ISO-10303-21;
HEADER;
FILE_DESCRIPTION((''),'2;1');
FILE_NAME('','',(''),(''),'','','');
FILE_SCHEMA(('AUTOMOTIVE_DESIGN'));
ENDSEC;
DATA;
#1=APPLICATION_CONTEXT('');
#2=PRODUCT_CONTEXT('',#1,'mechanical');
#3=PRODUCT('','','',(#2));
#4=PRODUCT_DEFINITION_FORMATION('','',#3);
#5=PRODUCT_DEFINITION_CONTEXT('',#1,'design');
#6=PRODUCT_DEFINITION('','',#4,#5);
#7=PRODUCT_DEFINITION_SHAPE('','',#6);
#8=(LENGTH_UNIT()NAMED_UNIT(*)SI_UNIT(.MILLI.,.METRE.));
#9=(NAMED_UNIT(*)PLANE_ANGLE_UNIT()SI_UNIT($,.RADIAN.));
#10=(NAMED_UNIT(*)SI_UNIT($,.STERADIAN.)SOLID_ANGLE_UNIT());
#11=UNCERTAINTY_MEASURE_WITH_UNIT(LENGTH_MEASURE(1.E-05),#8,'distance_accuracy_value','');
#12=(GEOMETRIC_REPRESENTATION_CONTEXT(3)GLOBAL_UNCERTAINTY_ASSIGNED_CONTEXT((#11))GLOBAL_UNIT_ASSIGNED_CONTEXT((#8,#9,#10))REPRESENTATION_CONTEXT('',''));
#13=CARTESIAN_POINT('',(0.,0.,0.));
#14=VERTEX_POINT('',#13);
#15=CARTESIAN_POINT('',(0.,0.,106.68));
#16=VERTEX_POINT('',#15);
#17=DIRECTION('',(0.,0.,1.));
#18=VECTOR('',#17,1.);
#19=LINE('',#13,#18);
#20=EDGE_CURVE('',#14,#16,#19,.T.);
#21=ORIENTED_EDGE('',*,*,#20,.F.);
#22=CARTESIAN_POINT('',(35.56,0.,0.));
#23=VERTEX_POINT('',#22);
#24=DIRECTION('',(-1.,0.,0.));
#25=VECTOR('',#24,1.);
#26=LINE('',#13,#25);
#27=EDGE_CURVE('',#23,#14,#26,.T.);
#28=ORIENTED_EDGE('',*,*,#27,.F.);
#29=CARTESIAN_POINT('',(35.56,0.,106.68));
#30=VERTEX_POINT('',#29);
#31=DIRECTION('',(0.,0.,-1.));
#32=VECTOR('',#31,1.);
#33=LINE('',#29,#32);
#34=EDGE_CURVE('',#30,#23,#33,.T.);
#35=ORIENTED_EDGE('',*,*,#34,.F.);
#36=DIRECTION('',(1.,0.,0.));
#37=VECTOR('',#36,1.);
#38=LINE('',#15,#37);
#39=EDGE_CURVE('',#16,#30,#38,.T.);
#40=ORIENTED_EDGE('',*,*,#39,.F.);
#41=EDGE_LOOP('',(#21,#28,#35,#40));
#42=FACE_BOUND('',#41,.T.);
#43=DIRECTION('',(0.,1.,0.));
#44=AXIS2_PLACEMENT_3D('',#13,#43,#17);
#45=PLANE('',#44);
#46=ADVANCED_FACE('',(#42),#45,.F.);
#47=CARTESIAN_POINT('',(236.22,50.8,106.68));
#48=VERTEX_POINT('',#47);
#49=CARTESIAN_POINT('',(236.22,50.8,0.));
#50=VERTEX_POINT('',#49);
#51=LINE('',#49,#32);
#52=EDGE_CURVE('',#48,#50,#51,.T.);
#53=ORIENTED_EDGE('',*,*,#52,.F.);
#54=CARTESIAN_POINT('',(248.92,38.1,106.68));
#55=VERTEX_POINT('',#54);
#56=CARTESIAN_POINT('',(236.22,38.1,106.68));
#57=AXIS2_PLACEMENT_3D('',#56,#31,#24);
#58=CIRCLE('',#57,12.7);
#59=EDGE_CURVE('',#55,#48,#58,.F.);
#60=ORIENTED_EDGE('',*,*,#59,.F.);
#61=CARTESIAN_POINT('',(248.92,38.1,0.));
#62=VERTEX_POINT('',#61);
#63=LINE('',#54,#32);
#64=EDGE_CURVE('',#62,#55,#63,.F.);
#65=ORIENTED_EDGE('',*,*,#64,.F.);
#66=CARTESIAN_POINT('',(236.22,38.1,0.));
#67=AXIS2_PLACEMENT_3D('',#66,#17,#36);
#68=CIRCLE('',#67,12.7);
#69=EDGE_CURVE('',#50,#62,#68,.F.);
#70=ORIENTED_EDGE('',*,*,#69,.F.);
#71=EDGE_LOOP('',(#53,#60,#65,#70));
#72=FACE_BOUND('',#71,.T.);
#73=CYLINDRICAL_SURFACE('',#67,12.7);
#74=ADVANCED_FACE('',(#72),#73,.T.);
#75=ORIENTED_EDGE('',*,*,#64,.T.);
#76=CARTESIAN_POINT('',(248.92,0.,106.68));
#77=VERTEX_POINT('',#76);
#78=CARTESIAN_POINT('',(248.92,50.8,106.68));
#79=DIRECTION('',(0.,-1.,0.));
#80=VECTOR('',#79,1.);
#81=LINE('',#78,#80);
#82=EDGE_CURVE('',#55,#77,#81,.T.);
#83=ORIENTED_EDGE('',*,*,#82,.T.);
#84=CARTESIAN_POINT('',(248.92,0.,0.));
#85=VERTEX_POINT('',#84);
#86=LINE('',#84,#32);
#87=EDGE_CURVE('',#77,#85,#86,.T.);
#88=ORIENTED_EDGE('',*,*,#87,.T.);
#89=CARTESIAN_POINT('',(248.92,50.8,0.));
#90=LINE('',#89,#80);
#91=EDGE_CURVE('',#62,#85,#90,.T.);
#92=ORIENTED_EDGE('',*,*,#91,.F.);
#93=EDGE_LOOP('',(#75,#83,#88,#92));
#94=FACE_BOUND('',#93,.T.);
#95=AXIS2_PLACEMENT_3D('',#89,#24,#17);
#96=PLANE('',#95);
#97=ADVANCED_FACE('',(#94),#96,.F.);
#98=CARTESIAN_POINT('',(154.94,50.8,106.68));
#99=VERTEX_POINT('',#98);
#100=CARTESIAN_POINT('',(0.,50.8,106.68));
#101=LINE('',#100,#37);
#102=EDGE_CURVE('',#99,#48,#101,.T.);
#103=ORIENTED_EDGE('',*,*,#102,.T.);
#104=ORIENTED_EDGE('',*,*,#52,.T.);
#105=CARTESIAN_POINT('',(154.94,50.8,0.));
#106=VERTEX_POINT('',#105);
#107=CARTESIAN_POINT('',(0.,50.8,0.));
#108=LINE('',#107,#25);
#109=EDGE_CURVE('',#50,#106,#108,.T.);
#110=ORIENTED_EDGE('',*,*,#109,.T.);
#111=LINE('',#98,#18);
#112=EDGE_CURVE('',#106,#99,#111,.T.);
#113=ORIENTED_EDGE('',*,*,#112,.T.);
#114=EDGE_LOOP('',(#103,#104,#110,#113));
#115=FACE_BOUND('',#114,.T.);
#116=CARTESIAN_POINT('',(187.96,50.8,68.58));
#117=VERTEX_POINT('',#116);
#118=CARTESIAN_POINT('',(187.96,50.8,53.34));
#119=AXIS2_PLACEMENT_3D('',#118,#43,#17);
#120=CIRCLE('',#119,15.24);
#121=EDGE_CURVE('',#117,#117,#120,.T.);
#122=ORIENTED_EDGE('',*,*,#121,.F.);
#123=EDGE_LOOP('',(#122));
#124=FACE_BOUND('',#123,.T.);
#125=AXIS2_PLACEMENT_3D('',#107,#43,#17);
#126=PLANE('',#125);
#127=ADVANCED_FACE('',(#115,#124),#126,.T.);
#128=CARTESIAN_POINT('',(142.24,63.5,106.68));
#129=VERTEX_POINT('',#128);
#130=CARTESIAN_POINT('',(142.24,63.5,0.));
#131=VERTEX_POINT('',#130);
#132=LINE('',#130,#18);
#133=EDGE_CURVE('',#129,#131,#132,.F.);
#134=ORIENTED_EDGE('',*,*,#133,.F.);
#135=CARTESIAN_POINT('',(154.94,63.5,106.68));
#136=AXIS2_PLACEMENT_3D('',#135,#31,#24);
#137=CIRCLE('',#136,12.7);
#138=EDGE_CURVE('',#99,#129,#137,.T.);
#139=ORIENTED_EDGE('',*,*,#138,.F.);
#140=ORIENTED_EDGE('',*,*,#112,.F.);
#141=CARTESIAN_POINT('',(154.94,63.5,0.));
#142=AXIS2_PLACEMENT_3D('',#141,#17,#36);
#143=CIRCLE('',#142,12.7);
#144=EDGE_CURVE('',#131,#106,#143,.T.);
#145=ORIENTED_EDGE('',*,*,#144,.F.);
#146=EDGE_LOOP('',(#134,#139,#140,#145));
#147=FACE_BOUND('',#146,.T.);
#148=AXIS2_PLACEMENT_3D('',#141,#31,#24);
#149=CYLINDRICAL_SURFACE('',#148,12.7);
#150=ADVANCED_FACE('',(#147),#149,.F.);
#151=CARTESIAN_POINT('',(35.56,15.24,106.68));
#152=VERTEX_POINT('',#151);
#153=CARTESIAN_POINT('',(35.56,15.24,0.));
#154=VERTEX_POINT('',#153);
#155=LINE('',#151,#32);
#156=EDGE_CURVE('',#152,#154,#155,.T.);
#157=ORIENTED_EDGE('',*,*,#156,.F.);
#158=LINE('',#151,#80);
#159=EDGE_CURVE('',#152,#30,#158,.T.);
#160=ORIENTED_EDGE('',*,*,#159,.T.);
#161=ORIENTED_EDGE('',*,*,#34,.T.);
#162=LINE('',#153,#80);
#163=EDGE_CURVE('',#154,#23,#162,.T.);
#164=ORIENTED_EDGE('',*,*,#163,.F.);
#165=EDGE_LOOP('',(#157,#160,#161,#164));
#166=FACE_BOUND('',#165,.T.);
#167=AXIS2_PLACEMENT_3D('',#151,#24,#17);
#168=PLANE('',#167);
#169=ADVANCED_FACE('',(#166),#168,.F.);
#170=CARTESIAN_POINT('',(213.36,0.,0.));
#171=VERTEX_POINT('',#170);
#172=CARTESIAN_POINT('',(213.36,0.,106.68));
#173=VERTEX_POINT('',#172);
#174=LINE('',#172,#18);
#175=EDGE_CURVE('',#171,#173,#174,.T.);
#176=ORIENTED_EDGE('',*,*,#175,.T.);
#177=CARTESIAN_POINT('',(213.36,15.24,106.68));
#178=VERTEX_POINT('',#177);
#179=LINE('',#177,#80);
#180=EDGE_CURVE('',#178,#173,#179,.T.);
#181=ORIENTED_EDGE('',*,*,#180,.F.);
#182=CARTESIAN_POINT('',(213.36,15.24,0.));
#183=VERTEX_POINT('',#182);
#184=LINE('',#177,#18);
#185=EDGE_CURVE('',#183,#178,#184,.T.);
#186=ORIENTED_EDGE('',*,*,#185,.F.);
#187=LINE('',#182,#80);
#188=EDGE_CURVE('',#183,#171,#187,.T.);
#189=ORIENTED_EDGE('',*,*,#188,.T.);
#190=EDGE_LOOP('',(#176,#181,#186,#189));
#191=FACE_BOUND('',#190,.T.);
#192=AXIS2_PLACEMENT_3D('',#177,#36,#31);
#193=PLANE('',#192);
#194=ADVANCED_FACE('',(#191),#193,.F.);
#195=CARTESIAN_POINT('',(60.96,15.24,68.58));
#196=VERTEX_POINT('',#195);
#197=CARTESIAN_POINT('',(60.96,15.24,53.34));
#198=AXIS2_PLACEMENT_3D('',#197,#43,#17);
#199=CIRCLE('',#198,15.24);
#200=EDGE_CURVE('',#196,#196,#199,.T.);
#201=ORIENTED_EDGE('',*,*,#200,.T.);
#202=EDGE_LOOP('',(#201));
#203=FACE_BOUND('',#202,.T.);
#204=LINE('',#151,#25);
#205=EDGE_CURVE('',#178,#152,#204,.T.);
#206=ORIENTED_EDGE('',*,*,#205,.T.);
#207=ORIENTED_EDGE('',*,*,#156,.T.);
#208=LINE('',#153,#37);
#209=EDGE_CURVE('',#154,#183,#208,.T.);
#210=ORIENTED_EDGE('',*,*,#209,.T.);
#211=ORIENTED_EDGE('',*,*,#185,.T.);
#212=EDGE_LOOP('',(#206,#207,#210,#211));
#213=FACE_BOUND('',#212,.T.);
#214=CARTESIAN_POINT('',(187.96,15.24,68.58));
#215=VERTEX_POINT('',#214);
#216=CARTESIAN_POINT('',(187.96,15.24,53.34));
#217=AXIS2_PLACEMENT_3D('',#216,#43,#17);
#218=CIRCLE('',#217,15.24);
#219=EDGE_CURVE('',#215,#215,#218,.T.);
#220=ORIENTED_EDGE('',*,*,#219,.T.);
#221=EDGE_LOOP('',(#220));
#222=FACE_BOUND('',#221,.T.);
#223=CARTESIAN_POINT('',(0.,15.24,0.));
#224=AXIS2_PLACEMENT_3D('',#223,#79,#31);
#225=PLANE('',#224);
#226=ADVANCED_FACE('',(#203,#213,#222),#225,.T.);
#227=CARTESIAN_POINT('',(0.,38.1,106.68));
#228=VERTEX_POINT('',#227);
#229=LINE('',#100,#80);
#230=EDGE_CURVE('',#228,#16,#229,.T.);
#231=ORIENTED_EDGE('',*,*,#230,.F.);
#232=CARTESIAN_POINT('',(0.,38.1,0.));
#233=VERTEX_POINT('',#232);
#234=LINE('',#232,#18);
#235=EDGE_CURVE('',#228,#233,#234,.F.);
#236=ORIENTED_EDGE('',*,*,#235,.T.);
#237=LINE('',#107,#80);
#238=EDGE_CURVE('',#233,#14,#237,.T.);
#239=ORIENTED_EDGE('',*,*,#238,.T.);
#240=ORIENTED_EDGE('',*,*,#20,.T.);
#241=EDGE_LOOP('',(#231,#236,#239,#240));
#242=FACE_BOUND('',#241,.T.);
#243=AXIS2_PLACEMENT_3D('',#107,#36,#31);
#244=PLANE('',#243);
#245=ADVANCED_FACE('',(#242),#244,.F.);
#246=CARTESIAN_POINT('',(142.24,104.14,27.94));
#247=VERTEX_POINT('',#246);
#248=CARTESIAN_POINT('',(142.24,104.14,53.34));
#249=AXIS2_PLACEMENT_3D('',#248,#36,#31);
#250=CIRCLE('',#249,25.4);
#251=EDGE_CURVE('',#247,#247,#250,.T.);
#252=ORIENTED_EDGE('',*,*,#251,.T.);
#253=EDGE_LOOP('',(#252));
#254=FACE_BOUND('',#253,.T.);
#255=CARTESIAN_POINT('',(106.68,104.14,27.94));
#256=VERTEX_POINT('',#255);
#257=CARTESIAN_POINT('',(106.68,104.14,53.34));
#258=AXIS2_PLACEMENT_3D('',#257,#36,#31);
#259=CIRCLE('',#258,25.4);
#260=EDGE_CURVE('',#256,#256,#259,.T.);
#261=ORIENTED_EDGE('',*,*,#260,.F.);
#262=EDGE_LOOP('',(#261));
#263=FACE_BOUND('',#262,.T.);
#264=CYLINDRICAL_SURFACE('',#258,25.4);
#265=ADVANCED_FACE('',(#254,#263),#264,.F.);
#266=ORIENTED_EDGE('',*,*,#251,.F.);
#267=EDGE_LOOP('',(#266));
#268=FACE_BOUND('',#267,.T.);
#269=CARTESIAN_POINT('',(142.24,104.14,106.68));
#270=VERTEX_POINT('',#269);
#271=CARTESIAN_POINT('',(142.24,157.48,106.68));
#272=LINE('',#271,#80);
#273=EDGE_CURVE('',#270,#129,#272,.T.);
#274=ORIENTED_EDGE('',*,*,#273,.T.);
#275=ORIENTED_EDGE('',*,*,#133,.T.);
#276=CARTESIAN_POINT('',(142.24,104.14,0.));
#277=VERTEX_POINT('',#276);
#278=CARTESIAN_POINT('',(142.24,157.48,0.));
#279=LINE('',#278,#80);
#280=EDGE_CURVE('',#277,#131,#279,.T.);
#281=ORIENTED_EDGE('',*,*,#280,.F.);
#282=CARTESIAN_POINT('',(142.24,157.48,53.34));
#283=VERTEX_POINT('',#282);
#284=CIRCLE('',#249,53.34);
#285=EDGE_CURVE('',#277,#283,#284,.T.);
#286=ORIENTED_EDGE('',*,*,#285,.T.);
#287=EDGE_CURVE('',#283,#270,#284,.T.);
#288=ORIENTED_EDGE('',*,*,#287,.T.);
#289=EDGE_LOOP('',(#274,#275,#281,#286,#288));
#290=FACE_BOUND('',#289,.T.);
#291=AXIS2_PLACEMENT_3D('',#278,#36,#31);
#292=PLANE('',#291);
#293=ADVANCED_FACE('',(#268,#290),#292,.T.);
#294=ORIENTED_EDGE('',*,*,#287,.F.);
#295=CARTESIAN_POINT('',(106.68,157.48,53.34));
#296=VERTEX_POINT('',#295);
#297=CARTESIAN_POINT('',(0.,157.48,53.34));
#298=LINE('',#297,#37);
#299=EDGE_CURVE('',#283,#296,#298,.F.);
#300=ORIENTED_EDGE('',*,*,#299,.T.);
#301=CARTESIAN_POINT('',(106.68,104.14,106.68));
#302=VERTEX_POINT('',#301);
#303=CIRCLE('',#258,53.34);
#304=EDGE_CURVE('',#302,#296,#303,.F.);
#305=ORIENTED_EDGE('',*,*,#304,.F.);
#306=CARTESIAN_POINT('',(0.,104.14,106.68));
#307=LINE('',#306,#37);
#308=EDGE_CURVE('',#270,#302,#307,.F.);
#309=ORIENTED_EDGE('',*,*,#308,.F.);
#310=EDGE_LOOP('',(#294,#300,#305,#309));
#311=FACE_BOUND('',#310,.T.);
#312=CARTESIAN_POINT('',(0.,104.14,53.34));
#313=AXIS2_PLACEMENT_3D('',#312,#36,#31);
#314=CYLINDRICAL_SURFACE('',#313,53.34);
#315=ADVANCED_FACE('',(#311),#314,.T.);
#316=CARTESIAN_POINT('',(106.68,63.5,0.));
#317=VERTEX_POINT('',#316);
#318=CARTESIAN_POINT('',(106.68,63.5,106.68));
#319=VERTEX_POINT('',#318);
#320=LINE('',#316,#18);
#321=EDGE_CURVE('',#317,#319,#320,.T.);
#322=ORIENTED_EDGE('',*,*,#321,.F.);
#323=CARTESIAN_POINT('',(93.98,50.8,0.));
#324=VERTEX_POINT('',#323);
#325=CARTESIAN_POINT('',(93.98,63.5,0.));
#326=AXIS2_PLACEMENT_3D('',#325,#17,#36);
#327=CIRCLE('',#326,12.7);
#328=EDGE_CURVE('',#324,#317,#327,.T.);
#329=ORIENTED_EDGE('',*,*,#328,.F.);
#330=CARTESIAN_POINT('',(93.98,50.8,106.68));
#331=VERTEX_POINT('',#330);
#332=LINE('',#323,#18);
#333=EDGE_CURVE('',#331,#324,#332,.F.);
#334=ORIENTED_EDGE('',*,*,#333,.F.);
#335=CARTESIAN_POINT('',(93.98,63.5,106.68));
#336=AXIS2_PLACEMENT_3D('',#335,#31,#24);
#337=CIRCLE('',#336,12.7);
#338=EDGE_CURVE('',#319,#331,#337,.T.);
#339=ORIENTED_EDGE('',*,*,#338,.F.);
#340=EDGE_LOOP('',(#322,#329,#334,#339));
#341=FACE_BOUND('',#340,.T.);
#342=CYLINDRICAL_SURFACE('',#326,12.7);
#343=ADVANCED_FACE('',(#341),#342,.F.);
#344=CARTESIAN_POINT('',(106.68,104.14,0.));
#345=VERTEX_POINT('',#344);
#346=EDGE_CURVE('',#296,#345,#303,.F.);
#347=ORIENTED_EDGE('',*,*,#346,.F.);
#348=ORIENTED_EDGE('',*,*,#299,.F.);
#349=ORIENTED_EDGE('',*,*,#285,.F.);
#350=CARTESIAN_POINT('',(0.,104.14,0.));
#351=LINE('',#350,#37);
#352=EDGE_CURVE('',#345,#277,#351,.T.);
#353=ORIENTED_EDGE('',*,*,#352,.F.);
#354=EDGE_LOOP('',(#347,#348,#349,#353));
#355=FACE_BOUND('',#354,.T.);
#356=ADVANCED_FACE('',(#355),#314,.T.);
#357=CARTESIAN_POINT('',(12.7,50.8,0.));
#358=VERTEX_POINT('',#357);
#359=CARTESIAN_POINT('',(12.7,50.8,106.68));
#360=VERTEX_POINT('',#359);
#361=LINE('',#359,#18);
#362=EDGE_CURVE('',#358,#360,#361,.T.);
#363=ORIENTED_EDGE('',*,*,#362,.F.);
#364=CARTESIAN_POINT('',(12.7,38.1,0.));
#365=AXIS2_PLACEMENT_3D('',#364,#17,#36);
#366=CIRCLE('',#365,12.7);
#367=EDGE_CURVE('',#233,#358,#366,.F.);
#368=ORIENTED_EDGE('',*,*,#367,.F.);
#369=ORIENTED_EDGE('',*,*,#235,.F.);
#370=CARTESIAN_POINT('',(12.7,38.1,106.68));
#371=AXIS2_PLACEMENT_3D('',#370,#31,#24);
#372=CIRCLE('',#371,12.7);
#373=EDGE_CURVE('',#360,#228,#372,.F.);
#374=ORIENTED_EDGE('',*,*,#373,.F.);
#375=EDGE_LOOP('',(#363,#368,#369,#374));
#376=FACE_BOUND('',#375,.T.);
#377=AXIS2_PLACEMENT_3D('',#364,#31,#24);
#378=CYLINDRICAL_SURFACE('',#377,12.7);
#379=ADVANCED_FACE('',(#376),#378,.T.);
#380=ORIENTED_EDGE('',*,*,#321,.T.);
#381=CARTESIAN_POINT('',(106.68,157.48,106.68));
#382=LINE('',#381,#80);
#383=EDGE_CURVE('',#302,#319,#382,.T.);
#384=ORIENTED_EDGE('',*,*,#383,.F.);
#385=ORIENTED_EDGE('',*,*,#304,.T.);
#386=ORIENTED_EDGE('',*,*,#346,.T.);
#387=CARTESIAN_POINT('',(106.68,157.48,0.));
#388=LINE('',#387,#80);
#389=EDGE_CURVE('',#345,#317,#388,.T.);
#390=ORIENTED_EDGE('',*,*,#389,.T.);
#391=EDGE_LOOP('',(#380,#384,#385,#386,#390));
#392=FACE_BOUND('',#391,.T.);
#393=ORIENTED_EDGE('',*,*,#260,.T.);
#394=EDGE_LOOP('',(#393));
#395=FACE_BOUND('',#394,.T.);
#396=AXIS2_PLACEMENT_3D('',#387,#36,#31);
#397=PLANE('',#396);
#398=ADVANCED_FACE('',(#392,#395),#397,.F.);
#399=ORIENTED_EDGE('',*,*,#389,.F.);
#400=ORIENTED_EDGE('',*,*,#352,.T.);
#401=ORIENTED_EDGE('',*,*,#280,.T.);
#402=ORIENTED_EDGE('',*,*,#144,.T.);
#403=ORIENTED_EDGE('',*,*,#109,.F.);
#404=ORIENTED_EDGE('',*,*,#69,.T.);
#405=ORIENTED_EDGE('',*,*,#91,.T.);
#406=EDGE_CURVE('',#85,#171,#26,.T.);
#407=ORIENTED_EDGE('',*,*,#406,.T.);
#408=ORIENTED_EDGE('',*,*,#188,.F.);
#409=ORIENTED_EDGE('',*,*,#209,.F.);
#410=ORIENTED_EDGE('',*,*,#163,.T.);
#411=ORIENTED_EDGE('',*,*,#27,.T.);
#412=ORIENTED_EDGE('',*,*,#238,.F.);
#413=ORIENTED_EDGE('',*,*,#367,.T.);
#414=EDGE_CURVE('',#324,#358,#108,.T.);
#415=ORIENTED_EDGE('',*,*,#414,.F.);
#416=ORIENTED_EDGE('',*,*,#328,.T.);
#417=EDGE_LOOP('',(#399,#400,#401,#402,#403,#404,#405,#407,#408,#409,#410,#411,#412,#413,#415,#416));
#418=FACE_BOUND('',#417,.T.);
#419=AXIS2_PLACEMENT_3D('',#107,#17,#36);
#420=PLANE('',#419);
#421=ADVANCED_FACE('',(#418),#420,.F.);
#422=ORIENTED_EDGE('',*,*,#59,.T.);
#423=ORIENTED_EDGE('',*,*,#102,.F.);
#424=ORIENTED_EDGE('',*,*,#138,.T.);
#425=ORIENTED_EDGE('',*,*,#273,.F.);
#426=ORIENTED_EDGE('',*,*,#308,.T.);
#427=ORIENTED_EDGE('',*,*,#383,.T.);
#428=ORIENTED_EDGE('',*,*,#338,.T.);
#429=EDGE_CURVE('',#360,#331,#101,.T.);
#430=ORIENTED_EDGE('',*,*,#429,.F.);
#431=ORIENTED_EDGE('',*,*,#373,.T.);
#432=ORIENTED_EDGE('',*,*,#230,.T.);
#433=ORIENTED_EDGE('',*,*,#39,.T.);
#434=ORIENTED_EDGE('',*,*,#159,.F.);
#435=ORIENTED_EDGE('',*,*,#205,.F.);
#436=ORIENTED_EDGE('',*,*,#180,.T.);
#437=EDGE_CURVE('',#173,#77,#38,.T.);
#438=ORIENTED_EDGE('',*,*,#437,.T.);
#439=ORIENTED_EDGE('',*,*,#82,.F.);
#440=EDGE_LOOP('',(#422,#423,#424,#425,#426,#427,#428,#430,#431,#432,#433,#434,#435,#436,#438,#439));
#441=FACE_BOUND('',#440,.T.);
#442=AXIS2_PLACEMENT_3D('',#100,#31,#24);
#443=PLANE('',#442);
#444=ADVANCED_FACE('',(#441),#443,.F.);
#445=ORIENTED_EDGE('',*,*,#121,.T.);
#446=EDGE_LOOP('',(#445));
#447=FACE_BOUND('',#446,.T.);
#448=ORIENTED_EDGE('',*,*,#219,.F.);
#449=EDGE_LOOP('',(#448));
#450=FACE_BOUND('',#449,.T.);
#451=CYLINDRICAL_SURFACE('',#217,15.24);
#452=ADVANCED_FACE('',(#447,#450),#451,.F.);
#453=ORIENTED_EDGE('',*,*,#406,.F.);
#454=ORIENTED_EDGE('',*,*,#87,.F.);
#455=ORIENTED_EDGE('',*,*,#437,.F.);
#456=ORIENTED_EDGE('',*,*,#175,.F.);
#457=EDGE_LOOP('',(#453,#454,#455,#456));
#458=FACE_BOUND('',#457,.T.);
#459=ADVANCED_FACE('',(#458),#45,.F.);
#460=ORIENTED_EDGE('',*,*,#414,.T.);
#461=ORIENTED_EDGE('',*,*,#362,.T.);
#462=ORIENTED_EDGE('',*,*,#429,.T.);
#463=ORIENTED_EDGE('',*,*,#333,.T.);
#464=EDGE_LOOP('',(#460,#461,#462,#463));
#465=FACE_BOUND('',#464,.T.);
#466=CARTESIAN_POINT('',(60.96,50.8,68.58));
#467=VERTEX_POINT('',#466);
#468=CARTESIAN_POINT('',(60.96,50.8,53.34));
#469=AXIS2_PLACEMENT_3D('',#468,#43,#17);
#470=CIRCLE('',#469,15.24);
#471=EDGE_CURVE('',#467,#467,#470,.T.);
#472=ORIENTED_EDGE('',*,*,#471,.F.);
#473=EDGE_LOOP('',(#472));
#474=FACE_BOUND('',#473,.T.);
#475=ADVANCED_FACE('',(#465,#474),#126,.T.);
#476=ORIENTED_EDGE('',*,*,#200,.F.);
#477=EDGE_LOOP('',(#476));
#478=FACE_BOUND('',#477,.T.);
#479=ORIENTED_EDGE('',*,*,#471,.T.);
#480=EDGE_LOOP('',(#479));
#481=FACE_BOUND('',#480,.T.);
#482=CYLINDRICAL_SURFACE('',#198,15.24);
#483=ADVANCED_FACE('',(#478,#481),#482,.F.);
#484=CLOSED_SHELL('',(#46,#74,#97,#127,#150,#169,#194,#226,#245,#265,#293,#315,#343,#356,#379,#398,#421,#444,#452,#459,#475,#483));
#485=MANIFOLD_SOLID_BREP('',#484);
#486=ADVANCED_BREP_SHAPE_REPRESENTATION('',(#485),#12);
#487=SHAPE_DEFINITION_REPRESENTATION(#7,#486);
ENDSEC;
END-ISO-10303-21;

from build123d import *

# Parameters (mm, degrees)
SKETCH1_W           = 248.92
SKETCH1_H           = 106.68
BOSS_EXTRUDE1_DEPTH = 50.8
SKETCH2_W           = 177.8
SKETCH2_H           = 106.68
CUT_EXTRUDE1_DEPTH  = 15.24
SKETCH3_R           = 15.24
CUT_EXTRUDE3_DEPTH  = 35.56
SKETCH3_4_W         = 35.56
SKETCH3_4_H         = 106.68
BOSS_EXTRUDE2_DEPTH = 106.68
SKETCH4_R           = 25.4
CUT_EXTRUDE4_DEPTH  = 35.56
FILLET1_R           = 53.34
FILLET2_R           = 12.7
FILLET3_R           = 12.7


with BuildPart() as part:
    # Sketch1 → Boss-Extrude1 (new body)
    with BuildSketch(Plane(origin=(0, 0, 0), x_dir=(1, 0, 0), z_dir=(0, 1, 0))):
        with Locations((124.46, -53.34)):
            Rectangle(SKETCH1_W, SKETCH1_H)
    extrude(amount=BOSS_EXTRUDE1_DEPTH)

    # Sketch2 → Cut-Extrude1 (cut)
    with BuildSketch(Plane.XZ):
        with Locations((124.46, 53.34)):
            Rectangle(SKETCH2_W, SKETCH2_H)
    extrude(amount=-CUT_EXTRUDE1_DEPTH, mode=Mode.SUBTRACT)

    # Sketch3 → Cut-Extrude3 (cut)
    with BuildSketch(Plane(origin=(0, 50.8, 0), x_dir=(1, 0, 0), z_dir=(0, 1, 0))):
        with Locations(Location((60.96, -53.34, 0), (0, 0, 270))):
            Circle(SKETCH3_R)
        with Locations(Location((187.96, -53.34, 0), (0, 0, 270))):
            Circle(SKETCH3_R)
    extrude(amount=-CUT_EXTRUDE3_DEPTH, mode=Mode.SUBTRACT)

    # Sketch3<4> → Boss-Extrude2 (add)
    with BuildSketch(Plane(origin=(0, 50.8, 0), x_dir=(1, 0, 0), z_dir=(0, 1, 0))):
        with Locations((124.46, -53.34)):
            Rectangle(SKETCH3_4_W, SKETCH3_4_H)
    extrude(amount=BOSS_EXTRUDE2_DEPTH)

    # Sketch4 → Cut-Extrude4 (cut)
    with BuildSketch(Plane(origin=(142.24, 0, 0), x_dir=(0, 0, -1), z_dir=(1, 0, 0))):
        with Locations((-53.34, 104.14)):
            Circle(SKETCH4_R)
    extrude(amount=-CUT_EXTRUDE4_DEPTH, mode=Mode.SUBTRACT)

    # Fillet1
    fillet1_edges = [part.edges().sort_by_distance(p)[0] for p in [
        (124.46, 157.48, 106.68),
        (124.46, 157.48, 0),
    ]]
    fillet(fillet1_edges, radius=FILLET1_R - 0.0001)  # a hair under: the kernel refuses the full size

    # Fillet2
    fillet2_edges = [part.edges().sort_by_distance(p)[0] for p in [
        (248.92, 50.8, 53.34),
        (0, 50.8, 53.34),
    ]]
    fillet(fillet2_edges, radius=FILLET2_R)

    # Fillet3
    fillet3_edges = [part.edges().sort_by_distance(p)[0] for p in [
        (106.68, 50.8, 53.34),
        (142.24, 50.8, 53.34),
    ]]
    fillet(fillet3_edges, radius=FILLET3_R)


solid = part.part
